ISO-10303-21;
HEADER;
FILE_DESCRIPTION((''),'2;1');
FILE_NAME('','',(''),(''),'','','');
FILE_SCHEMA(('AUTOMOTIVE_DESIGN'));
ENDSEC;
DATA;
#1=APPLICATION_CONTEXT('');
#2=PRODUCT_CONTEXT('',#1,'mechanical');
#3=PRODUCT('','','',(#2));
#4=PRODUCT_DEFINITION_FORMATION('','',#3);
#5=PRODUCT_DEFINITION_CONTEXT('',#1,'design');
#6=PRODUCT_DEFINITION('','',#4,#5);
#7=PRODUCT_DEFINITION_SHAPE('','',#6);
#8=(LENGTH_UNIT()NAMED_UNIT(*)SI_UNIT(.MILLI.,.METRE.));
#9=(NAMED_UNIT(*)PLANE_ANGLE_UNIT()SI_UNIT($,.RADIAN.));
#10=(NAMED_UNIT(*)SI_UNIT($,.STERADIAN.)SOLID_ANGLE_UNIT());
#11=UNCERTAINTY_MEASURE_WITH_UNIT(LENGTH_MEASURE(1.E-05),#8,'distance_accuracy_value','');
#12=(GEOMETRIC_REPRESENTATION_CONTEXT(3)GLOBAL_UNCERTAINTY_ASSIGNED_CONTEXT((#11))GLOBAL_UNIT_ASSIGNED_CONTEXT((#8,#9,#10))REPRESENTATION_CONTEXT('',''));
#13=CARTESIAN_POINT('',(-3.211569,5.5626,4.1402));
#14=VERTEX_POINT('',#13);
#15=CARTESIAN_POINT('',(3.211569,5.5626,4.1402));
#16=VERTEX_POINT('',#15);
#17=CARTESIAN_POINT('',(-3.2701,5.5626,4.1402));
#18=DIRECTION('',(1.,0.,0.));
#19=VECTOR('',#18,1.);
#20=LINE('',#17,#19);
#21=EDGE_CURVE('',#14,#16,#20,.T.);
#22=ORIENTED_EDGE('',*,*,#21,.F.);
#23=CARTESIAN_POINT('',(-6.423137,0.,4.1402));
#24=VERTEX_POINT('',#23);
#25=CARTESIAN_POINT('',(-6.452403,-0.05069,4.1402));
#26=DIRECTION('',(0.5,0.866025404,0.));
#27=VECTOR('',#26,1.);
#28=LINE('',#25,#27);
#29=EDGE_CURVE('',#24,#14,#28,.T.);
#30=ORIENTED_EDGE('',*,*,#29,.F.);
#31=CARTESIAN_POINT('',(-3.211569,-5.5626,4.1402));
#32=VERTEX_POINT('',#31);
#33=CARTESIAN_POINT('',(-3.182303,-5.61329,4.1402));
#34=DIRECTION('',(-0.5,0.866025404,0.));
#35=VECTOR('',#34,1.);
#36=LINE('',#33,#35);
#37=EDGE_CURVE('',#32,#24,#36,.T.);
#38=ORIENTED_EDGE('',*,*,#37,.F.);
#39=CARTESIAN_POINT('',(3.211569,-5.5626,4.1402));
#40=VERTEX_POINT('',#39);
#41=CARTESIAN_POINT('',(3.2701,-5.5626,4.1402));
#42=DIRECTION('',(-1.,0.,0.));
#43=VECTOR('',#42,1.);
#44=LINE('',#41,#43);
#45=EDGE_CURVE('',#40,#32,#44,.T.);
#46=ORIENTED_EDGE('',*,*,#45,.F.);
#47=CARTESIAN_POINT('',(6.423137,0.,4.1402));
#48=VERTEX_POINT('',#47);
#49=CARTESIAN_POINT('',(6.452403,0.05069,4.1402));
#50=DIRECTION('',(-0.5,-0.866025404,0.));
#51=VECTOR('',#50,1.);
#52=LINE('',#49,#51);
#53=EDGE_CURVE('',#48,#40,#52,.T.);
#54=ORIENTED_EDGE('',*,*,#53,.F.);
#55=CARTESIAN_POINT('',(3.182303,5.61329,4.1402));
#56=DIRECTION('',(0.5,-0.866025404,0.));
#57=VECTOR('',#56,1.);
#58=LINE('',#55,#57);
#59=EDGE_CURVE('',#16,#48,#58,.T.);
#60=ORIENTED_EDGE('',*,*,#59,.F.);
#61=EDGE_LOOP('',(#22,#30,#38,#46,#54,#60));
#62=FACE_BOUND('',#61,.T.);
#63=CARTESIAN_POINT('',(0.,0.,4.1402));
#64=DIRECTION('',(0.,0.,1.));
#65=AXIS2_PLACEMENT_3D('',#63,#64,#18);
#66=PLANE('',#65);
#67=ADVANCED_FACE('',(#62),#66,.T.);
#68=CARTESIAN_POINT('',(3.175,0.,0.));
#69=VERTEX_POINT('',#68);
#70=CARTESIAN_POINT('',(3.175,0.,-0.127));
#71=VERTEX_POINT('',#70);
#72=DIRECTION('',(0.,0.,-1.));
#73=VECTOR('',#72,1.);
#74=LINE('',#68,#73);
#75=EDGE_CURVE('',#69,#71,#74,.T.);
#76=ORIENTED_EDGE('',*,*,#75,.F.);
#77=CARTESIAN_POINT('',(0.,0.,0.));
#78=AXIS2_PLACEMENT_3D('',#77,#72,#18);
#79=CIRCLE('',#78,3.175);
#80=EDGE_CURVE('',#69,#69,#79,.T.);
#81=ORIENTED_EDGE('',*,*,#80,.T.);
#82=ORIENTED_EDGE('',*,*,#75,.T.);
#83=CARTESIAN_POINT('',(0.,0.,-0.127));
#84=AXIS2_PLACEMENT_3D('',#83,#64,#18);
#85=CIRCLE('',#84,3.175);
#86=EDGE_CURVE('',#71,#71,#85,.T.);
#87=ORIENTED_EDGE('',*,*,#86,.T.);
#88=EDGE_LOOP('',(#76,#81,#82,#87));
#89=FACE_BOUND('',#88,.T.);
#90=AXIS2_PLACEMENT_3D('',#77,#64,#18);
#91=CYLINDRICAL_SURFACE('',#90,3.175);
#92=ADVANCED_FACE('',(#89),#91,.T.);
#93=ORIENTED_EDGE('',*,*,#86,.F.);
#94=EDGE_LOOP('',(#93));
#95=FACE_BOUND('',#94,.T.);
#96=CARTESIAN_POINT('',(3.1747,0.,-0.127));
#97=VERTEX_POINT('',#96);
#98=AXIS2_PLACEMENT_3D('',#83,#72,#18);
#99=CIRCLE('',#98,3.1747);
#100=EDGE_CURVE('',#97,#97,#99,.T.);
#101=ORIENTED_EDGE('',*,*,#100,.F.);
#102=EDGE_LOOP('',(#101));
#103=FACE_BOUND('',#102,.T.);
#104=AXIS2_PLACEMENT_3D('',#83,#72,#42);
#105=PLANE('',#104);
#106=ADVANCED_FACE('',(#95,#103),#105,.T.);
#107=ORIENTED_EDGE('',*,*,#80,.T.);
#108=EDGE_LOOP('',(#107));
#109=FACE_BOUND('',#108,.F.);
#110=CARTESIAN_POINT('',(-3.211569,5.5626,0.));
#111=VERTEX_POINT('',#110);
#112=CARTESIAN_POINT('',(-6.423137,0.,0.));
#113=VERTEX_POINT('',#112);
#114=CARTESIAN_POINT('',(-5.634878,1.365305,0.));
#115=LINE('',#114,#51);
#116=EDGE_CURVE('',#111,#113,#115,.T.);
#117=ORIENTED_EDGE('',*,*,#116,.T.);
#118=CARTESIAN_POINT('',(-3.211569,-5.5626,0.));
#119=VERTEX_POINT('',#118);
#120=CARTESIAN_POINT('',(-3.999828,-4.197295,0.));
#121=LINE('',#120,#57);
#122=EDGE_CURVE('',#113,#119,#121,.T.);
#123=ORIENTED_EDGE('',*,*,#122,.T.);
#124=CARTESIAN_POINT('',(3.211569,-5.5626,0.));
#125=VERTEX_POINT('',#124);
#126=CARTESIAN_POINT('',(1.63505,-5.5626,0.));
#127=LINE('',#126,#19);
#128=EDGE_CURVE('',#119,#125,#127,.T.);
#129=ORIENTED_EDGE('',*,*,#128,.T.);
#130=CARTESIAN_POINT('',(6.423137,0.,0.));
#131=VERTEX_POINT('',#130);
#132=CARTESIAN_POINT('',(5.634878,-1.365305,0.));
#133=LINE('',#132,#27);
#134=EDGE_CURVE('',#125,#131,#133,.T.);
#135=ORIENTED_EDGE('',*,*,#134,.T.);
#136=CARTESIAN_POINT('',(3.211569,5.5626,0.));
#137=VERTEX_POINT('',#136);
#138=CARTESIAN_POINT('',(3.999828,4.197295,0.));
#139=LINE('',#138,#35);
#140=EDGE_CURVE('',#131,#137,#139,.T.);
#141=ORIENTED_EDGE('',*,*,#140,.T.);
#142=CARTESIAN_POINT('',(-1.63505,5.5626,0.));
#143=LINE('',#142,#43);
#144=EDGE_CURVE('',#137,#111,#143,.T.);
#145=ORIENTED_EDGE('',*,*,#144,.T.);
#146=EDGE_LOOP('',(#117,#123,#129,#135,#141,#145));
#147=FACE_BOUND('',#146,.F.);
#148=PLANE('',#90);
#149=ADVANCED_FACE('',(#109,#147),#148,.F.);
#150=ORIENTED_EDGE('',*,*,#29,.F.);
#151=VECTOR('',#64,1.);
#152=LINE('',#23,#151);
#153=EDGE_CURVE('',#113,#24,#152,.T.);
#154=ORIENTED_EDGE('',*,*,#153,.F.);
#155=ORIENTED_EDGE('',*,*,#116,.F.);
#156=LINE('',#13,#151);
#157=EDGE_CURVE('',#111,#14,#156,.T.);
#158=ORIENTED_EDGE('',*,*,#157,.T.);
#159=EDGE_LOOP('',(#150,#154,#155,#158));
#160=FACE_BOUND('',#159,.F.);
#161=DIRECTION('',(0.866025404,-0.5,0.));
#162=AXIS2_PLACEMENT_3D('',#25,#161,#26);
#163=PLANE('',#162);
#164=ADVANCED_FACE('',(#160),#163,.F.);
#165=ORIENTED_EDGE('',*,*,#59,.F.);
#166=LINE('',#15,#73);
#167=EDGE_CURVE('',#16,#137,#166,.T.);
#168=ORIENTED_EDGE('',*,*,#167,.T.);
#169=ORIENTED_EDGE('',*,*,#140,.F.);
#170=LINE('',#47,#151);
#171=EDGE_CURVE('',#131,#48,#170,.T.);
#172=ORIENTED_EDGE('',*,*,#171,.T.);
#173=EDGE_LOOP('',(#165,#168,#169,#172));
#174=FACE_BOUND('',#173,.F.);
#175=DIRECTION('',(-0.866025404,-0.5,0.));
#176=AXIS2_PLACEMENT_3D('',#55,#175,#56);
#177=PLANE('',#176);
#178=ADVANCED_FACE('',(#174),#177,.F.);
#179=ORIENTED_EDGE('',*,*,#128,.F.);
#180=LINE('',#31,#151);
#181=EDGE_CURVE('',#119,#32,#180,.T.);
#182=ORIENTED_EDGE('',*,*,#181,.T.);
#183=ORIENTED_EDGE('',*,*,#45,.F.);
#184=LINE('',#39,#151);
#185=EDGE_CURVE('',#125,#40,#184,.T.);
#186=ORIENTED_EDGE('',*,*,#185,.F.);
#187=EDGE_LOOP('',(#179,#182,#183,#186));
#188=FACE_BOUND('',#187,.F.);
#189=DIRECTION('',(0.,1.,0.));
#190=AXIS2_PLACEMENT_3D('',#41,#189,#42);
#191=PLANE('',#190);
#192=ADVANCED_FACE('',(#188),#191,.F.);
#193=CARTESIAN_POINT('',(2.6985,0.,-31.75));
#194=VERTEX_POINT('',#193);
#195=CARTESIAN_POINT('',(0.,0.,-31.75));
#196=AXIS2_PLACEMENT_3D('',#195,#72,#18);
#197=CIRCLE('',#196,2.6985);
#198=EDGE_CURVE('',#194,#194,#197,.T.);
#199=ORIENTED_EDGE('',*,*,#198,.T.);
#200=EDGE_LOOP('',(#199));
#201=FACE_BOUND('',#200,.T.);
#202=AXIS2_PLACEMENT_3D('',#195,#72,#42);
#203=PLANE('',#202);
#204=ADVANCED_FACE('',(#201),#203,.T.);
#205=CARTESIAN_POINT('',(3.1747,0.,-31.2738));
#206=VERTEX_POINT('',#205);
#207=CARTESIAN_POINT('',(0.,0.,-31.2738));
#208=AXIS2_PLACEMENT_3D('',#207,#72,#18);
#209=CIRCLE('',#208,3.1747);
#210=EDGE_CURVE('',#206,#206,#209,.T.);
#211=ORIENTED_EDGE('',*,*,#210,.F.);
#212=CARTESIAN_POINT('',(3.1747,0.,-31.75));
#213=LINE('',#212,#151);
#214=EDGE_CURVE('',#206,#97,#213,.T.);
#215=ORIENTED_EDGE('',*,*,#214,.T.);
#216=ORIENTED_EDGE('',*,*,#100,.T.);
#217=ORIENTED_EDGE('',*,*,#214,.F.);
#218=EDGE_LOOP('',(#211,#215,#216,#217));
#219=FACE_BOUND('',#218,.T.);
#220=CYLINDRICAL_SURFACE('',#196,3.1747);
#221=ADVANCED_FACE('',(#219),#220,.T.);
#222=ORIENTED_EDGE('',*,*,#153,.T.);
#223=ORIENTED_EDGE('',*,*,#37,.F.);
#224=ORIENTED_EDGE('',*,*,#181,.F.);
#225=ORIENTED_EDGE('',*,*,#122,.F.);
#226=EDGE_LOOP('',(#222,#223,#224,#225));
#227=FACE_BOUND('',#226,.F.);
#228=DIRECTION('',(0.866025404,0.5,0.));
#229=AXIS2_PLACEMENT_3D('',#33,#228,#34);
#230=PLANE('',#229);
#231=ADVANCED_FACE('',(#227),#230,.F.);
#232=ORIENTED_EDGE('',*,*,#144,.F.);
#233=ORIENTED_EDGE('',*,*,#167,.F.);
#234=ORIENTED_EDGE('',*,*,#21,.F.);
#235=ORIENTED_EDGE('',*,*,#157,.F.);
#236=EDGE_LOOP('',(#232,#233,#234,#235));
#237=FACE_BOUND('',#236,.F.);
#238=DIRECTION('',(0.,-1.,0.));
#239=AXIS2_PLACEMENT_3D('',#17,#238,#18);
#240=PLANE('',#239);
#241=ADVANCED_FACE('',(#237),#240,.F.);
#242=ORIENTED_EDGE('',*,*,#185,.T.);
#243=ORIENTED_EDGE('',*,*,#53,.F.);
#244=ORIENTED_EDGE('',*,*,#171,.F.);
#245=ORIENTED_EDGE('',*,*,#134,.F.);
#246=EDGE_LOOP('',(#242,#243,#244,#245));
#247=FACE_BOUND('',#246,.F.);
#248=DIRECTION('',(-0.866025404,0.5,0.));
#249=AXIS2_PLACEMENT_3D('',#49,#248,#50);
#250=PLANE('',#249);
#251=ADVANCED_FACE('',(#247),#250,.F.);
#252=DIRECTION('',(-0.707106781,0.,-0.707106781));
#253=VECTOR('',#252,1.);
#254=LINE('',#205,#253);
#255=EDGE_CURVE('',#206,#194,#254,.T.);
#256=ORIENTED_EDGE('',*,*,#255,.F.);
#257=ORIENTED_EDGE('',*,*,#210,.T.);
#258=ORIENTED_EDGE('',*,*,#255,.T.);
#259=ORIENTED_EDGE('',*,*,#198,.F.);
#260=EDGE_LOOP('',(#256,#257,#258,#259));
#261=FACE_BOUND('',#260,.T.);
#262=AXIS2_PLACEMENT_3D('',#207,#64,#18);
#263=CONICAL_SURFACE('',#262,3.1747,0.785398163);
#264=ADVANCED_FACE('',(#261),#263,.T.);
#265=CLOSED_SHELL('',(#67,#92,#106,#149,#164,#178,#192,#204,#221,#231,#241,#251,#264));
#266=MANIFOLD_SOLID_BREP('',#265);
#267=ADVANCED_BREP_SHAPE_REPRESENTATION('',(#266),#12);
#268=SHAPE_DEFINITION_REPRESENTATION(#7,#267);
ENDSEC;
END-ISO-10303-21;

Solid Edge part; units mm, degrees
sketch "Sketch1" plane through (0, 0, 0) normal (0, 0, 1) x (1, 0, 0)
  circle A0 centre (0, 0) radius 6.4526
  dimension "D1" = 12.9052
extrude "Protrusion1" add sketch "Sketch1" along normal blind 4.1402
sketch "Sketch2" plane through (0, 0, 0) normal (0, 0, -1) x (1, 0, 0)
  circle A0 centre (0, 0) radius 3.175
extrude "Protrusion2" add sketch "Sketch2" along normal blind 31.75
sketch "Sketch3" plane through (0, 0, -31.75) normal (0, 0, -1) x (1, 0, 0)
  circle A0 centre (0, 0) radius 3.1747
extrude "Cutout1" cut sketch "Sketch3" against normal blind 31.623 flip side to cut
chamfer "Chamfer_1" distance 0.4762 angle 45 1 edges at (-3.1747, 0, -31.75)
sketch "Sketch4" plane through (0, 0, 4.1402) normal (0, 0, 1) x (1, 0, 0)
  line L0 (-3.2701, 5.5626) -> (3.2701, 5.5626)
  dimension "D1" = 11.1252
extrude "Cutout2" cut sketch "Sketch4" against normal up to next material side at (0, 5.6126, 4.1402)
pattern_circular "Pattern1" count 6 over 360 about axis through (0, 0, 4.1402) along (0, 0, 1) of "Cutout2"
properties part number "24102284"
